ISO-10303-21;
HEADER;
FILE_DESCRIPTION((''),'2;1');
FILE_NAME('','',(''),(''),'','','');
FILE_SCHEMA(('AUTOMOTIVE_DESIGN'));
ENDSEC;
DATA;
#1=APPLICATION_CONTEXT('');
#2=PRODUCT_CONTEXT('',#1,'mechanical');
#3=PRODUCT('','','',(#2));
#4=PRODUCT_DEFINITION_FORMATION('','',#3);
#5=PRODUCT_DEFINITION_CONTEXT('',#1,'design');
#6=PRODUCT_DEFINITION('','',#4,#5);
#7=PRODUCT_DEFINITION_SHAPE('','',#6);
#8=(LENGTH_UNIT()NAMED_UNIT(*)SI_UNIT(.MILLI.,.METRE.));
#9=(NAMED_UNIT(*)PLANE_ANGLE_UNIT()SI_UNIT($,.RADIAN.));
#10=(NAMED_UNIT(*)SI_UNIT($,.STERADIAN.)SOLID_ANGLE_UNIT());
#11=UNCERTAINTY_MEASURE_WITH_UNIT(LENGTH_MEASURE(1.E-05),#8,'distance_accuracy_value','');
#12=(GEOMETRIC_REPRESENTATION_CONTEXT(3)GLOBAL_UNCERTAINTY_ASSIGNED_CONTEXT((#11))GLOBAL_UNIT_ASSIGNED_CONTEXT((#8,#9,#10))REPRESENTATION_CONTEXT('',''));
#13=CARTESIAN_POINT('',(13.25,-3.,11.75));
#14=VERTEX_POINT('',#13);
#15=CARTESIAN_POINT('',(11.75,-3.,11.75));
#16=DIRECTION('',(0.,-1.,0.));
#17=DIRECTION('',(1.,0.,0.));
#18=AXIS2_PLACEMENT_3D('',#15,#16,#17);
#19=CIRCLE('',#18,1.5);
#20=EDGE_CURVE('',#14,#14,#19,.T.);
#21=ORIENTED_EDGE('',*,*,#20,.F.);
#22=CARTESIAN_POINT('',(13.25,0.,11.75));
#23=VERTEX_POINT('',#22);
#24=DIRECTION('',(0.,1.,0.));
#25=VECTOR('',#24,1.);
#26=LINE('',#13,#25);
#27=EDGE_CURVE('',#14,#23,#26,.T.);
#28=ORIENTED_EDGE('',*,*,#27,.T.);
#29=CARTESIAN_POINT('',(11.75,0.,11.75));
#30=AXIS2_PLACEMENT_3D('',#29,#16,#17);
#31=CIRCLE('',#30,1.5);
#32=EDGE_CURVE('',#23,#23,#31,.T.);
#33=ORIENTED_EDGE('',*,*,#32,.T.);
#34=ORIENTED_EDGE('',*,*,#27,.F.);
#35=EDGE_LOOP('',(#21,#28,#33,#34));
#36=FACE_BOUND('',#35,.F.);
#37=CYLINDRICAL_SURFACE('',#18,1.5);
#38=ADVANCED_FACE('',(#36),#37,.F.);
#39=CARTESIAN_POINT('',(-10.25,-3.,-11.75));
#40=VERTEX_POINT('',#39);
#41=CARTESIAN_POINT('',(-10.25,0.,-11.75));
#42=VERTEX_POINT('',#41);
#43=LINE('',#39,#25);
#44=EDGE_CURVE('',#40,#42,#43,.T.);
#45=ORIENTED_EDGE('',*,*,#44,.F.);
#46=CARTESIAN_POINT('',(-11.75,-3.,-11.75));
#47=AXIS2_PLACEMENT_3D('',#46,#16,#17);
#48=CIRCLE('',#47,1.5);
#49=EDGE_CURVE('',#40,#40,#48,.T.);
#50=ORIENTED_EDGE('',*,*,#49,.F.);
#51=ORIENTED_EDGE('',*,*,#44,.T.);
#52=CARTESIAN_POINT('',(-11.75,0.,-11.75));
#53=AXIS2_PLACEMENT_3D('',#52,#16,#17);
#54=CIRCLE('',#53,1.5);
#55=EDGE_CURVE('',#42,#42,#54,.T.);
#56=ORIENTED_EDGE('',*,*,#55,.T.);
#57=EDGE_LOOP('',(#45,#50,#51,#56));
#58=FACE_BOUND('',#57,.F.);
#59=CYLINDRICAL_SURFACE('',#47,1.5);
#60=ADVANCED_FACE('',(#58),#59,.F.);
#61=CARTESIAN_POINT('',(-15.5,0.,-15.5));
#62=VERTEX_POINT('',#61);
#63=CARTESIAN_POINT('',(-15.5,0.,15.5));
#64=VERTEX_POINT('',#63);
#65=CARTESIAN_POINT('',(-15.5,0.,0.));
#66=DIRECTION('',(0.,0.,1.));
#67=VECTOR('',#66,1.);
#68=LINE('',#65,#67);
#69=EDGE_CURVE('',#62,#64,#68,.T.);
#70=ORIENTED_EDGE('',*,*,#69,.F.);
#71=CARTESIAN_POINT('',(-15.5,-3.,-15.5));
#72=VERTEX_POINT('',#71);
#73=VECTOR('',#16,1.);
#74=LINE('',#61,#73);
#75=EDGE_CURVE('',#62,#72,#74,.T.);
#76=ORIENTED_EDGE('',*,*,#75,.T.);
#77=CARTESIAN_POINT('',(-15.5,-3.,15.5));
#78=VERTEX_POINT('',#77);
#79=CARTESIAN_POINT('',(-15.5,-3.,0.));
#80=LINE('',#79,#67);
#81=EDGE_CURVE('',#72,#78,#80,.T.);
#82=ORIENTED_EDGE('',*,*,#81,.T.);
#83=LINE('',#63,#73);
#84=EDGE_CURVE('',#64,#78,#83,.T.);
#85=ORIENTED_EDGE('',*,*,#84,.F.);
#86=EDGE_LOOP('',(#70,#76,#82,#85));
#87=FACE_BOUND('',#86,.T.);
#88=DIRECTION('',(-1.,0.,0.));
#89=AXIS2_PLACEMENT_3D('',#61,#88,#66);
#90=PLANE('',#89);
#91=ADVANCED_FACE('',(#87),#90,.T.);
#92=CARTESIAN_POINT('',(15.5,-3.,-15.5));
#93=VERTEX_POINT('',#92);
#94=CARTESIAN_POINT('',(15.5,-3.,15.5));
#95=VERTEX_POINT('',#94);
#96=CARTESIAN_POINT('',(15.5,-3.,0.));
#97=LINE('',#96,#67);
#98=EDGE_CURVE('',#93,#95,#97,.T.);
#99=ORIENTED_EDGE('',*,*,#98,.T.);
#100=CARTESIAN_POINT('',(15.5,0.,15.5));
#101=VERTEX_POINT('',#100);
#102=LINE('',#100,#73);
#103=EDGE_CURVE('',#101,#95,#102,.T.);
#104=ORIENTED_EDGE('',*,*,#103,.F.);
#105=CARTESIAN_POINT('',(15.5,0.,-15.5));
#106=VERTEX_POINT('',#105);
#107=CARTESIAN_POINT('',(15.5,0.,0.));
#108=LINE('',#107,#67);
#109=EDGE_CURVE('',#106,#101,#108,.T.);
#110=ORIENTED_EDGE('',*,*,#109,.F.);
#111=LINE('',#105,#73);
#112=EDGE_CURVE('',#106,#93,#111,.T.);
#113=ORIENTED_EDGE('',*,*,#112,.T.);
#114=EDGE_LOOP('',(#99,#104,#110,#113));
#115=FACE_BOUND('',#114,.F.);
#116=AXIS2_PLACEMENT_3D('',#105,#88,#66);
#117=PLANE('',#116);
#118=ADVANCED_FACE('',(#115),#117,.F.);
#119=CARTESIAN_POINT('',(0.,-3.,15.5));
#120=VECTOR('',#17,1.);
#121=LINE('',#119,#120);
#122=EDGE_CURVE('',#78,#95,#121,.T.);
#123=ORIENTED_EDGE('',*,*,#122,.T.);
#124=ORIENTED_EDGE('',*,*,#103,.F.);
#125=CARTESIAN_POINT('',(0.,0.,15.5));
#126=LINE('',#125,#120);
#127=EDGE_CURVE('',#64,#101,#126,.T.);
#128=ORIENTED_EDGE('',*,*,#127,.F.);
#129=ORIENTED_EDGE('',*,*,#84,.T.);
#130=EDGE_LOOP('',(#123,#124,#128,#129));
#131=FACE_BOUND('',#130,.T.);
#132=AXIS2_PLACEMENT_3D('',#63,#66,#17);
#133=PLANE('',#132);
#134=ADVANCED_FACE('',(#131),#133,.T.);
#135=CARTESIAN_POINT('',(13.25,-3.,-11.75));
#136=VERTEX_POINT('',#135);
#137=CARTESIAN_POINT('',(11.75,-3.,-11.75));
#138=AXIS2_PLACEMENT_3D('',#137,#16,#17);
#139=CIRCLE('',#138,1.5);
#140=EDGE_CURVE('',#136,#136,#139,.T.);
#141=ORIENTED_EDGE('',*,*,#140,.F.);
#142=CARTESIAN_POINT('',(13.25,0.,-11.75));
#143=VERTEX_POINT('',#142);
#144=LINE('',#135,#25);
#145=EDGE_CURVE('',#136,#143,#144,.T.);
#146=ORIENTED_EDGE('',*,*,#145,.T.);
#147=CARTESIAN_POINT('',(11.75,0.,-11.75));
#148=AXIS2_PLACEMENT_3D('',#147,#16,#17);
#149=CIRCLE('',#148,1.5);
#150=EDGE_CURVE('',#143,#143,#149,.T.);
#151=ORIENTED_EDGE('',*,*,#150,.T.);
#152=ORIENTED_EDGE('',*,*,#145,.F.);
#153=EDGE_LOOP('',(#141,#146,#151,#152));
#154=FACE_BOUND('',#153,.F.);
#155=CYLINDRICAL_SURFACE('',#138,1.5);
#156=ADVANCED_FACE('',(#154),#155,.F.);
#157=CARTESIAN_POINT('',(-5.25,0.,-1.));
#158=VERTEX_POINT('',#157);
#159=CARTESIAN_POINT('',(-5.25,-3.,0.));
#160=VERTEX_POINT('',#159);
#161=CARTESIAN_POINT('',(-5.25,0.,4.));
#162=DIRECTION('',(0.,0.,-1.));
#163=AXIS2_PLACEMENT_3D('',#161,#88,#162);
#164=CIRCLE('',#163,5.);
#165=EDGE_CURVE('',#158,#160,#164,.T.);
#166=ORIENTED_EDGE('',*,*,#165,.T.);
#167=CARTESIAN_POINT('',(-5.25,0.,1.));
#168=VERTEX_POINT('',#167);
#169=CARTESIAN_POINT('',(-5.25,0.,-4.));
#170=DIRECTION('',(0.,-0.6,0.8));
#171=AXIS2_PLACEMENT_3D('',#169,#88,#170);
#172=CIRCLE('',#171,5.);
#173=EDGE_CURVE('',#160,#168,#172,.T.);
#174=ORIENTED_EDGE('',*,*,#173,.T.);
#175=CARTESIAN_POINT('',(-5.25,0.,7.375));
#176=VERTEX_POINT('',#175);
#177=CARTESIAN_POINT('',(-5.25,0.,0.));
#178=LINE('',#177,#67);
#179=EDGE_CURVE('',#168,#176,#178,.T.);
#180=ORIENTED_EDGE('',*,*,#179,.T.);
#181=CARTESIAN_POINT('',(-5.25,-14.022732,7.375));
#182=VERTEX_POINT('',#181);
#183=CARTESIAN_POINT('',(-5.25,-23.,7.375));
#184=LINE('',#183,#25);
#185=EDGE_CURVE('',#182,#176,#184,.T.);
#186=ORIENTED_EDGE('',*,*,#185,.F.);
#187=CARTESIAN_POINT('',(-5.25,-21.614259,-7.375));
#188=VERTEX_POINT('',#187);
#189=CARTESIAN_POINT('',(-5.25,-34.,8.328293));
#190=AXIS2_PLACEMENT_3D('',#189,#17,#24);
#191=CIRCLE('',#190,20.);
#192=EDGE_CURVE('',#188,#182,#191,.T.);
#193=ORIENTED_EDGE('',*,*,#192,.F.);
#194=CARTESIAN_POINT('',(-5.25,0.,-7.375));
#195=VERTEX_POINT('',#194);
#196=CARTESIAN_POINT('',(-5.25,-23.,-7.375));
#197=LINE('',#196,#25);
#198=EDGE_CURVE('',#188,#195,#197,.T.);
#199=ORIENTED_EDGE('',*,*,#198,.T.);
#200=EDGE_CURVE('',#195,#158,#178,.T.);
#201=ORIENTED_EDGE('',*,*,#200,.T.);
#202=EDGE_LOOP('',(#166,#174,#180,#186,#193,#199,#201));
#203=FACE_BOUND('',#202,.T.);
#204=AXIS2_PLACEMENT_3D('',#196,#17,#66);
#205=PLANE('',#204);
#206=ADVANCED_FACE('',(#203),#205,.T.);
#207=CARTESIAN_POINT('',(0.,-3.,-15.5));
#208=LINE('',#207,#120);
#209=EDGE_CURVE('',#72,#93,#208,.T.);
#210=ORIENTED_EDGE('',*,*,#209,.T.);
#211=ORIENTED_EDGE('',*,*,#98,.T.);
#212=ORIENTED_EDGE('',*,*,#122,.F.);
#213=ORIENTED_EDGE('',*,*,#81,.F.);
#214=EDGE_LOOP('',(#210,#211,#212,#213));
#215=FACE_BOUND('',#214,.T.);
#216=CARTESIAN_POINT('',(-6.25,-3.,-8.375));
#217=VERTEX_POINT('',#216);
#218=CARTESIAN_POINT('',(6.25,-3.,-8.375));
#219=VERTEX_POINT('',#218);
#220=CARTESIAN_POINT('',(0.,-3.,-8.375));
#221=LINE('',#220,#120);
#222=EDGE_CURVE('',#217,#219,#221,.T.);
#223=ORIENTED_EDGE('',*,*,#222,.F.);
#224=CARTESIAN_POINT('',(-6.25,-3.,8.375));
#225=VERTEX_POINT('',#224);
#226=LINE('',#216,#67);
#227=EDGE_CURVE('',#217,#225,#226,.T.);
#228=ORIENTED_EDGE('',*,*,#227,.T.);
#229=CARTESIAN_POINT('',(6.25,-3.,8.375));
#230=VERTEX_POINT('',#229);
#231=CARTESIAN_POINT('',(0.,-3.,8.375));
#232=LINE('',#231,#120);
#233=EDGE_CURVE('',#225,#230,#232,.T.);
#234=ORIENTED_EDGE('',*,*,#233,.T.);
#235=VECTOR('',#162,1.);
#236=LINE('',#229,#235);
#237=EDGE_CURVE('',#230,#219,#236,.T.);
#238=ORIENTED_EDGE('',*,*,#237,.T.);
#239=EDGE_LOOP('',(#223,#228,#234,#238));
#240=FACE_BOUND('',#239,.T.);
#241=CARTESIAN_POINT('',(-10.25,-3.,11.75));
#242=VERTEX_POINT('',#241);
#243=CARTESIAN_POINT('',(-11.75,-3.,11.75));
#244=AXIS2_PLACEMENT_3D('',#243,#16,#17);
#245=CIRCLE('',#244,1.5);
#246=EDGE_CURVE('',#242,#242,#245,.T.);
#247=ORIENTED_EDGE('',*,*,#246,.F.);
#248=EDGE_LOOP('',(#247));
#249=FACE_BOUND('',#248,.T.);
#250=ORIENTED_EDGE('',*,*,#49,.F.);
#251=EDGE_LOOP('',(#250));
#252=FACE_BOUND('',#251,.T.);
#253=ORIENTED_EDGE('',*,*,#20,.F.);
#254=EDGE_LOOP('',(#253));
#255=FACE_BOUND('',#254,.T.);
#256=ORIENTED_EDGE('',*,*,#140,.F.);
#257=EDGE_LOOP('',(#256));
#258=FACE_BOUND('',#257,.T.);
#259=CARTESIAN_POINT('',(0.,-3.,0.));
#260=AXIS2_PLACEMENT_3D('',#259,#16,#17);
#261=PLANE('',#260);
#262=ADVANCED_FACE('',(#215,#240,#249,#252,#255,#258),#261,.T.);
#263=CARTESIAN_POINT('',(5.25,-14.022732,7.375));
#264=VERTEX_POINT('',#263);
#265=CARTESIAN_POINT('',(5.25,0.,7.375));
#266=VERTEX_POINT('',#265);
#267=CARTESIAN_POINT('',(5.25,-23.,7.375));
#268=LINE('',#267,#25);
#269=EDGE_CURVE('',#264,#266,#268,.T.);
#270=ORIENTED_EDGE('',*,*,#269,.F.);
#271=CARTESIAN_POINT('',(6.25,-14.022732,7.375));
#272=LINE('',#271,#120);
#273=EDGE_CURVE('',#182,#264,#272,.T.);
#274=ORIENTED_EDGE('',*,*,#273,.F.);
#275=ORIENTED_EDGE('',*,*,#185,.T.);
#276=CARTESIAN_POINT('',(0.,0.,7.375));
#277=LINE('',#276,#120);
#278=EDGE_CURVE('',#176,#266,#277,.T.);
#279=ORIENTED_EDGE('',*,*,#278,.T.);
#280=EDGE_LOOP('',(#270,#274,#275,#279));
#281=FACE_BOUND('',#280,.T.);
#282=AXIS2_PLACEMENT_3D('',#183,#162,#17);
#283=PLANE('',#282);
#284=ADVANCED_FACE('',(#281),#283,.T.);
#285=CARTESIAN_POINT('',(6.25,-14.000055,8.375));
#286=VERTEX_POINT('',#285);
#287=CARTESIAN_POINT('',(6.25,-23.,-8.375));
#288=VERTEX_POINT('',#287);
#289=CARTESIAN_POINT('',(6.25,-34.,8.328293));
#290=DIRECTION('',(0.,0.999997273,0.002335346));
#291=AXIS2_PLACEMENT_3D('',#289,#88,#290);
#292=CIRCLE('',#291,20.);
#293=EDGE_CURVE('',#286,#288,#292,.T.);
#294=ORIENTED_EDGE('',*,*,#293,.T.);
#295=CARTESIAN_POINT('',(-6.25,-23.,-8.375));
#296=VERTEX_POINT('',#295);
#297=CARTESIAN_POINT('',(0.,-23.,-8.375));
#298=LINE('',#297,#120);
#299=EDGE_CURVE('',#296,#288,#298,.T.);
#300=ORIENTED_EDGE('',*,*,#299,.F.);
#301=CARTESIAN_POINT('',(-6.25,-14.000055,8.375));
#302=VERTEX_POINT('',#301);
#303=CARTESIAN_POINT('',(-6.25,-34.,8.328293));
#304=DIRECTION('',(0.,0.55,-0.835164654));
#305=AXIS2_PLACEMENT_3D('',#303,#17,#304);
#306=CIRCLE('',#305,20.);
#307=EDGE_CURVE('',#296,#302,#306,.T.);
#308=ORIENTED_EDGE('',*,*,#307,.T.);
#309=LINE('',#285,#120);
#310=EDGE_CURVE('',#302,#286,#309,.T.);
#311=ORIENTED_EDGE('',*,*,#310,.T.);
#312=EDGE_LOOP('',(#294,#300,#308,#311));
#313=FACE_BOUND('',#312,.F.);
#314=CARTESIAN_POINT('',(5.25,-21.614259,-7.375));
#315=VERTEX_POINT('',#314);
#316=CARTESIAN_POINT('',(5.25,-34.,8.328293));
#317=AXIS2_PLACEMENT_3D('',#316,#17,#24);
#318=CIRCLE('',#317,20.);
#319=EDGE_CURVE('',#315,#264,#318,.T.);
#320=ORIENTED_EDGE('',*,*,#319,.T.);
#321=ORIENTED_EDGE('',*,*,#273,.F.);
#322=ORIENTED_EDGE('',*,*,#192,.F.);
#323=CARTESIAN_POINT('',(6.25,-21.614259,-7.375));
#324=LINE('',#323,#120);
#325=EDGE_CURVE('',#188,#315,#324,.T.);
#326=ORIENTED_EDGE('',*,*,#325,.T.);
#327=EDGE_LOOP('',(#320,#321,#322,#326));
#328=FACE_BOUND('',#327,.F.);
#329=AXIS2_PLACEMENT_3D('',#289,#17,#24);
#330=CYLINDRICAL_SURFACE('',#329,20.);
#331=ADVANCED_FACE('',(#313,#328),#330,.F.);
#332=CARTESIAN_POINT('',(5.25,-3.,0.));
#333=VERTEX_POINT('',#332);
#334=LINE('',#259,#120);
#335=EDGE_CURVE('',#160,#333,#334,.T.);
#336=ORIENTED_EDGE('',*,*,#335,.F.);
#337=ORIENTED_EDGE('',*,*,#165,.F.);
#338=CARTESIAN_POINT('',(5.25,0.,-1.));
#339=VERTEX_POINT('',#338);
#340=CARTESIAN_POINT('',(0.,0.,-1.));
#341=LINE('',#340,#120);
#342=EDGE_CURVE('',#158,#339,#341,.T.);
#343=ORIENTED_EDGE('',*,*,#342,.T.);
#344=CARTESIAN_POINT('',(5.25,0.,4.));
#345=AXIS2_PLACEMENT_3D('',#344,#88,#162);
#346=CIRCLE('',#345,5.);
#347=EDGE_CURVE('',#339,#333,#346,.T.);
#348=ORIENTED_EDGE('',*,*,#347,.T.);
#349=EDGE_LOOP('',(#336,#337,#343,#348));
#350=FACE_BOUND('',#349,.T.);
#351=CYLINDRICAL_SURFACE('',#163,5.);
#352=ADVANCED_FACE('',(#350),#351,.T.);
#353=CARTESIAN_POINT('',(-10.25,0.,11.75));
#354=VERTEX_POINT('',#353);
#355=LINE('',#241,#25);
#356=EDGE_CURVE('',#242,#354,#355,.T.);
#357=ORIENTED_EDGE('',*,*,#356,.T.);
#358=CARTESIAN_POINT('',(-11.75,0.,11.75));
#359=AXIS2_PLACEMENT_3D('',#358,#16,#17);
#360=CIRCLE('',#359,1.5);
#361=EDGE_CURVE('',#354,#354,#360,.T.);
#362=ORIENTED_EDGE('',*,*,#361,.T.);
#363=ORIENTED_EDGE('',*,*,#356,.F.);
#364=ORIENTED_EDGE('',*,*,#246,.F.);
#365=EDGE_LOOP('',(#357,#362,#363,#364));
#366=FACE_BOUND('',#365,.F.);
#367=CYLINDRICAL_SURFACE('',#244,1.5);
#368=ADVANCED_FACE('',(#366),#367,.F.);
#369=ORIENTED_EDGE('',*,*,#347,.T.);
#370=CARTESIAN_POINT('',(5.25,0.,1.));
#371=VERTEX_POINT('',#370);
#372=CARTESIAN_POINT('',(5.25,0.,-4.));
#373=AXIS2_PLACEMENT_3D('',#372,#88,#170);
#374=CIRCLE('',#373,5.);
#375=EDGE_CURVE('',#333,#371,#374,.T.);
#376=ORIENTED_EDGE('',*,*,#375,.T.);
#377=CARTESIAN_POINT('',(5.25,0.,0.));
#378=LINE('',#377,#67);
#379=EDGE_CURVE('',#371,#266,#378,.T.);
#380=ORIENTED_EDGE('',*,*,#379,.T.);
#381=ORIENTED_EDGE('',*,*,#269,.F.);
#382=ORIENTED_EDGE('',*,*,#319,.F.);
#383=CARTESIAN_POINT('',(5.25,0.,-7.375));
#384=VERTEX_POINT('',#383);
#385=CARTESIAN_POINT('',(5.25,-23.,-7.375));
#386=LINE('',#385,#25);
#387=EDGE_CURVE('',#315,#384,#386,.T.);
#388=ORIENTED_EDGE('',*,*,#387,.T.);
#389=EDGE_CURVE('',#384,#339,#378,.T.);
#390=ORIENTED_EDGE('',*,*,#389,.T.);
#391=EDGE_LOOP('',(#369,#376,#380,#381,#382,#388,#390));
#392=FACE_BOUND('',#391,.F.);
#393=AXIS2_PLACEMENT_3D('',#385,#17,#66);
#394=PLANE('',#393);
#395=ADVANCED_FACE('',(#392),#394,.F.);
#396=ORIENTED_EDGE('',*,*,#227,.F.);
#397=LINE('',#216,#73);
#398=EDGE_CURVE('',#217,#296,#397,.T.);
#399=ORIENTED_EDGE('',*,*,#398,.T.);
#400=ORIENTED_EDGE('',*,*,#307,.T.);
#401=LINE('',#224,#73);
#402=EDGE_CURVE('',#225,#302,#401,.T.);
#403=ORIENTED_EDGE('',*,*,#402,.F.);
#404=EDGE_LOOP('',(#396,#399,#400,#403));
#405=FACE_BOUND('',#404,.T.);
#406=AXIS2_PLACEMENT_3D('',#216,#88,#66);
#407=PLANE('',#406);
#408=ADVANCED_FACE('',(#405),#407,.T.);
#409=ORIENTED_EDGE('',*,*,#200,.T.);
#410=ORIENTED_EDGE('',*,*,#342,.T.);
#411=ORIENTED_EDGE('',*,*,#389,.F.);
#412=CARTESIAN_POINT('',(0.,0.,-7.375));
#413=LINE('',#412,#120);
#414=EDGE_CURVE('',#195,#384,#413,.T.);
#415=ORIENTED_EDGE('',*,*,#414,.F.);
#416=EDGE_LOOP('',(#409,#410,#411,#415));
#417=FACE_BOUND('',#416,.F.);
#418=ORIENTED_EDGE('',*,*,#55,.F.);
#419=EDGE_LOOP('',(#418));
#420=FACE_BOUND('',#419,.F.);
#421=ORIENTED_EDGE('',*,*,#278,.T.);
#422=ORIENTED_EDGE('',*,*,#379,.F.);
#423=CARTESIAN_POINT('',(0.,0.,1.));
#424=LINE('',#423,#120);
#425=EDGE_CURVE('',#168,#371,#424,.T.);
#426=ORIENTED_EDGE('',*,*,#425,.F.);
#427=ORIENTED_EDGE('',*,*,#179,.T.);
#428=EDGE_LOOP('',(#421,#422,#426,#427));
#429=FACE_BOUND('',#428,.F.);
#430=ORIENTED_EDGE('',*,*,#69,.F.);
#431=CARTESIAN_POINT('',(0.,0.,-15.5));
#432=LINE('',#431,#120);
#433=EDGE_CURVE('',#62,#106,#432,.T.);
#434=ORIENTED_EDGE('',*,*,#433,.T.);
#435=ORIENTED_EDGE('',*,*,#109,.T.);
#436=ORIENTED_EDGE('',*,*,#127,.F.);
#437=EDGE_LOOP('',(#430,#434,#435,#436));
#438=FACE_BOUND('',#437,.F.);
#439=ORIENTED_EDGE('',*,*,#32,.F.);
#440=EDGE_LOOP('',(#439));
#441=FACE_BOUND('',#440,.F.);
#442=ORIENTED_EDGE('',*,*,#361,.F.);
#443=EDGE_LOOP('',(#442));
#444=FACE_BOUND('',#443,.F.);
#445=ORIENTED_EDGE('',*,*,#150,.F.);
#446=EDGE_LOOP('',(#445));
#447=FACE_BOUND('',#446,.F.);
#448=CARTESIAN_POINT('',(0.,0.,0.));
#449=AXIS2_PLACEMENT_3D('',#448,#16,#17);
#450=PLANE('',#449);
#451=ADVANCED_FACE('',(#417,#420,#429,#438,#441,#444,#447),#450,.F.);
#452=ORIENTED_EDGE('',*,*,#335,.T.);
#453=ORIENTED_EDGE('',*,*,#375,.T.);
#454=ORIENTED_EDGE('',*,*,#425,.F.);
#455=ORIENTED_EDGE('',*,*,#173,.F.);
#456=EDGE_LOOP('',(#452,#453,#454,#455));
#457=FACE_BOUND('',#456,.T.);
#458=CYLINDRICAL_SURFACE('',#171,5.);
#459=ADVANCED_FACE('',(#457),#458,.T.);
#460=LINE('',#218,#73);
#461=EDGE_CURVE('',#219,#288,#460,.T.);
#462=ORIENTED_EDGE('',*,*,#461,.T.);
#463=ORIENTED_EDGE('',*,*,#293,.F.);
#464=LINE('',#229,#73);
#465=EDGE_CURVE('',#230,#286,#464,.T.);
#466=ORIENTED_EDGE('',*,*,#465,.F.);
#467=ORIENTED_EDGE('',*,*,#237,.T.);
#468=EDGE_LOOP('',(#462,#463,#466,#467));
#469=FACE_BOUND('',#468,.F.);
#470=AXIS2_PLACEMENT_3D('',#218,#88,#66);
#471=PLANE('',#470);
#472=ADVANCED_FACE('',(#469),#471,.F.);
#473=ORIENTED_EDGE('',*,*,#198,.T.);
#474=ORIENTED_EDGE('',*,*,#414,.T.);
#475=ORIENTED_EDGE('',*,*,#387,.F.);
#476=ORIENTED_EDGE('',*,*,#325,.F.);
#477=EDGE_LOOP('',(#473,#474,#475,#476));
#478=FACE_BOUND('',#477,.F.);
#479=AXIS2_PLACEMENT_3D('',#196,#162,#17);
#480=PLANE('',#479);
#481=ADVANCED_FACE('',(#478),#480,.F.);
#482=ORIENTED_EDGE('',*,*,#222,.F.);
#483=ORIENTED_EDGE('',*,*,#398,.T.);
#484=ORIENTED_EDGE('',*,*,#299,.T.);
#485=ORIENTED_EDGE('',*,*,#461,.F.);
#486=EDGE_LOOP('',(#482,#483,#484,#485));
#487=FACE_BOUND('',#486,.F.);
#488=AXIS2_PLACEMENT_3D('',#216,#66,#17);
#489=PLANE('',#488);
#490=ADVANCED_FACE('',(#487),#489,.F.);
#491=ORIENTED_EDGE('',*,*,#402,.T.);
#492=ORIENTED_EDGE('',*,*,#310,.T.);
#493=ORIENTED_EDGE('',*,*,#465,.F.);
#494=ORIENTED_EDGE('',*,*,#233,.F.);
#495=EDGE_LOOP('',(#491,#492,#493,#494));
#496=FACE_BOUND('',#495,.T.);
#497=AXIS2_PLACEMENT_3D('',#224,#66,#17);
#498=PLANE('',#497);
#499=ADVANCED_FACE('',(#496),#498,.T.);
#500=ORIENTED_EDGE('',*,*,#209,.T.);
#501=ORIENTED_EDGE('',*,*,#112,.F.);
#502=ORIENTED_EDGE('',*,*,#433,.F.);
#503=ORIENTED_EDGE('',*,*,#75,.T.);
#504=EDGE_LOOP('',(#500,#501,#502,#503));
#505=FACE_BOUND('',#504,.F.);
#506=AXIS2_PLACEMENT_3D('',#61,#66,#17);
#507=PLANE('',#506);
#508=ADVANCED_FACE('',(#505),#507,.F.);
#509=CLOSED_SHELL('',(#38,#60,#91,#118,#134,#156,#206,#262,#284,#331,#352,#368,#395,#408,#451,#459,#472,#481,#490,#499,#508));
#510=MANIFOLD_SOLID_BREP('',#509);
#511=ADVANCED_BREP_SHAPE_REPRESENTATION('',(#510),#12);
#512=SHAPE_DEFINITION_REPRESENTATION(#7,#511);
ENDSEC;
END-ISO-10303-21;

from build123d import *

# Parameters (mm, degrees)
F0_W         = 31
F0_H         = 31
F1_DEPTH     = 3
F2_R         = 1.5
F3_DEPTH     = 3
F4_W         = 12.5
F4_H         = 16.75
F5_DEPTH     = 20
F6_W         = 10.5
F6_H         = 14.75
F7_DEPTH     = 23
F8_R         = 20
F9_DEPTH     = 25
F10_W        = 12.5
F10_H        = 1
F11_DEPTH    = 3
F12_T1_DEPTH = 10.5
F13_W        = 12.5
F13_H        = 1
F14_DEPTH    = 3
F15_T1_DEPTH = 10.5


# Not quite as in the source:
# - a fillet or chamfer that OpenCascade refuses, or shapes differently, is made with other operations: its cross-section is extruded or revolved along the edge and cut away or added


with BuildPart() as f1:
    # F0 (on Front) → F1 (new body)
    with BuildSketch(Plane.XZ):
        Rectangle(F0_W, F0_H)
    extrude(amount=F1_DEPTH)

    # F2 (on face) → F3 (cut)
    with BuildSketch(Plane.XZ.offset(3)):
        with Locations((-11.75, -11.75)):
            Circle(F2_R)
        with Locations((-11.75, 11.75)):
            Circle(F2_R)
        with Locations((11.75, 11.75)):
            Circle(F2_R)
        with Locations((11.75, -11.75)):
            Circle(F2_R)
    extrude(amount=-F3_DEPTH, mode=Mode.SUBTRACT)

    # F4 (on face) → F5 (join)
    with BuildSketch(Plane.XZ.offset(3)):
        Rectangle(F4_W, F4_H)
    extrude(amount=F5_DEPTH)

    # F6 (on face) → F7 (cut)
    with BuildSketch(Plane.XZ.offset(23)):
        Rectangle(F6_W, F6_H)
    extrude(amount=-F7_DEPTH, mode=Mode.SUBTRACT)

    # F8 (on face) → F9 (cut)
    with BuildSketch(Plane.YZ.offset(6.25)):
        with Locations((-34, 8.3282930885)):
            Circle(F8_R)
    extrude(amount=-F9_DEPTH, mode=Mode.SUBTRACT)

    # F10 (on face) → F11 (join)
    with BuildSketch(Plane.XZ.offset(3)):
        with Locations((0, -0.5)):
            Rectangle(F10_W, F10_H)
    extrude(amount=-F11_DEPTH)

    # F12: fillet of radius 5 on 1 edges, made by hand

    # F12_s2 → F12_t1 (cut)
    with BuildSketch(Plane.YZ.offset(-5.25)):
        with BuildLine():
            ThreePointArc((0, -1), (-1.5811388301, -0.7434164903), (-3, 0))
            Line((-3, 0), (-3, -1))
            Line((-3, -1), (0, -1))
        make_face()
    extrude(amount=F12_T1_DEPTH, mode=Mode.SUBTRACT)

    # F13 (on face) → F14 (join)
    with BuildSketch(Plane.XZ.offset(3)):
        with Locations((0, 0.5)):
            Rectangle(F13_W, F13_H)
    extrude(amount=-F14_DEPTH)

    # F15: fillet of radius 5 on 1 edges, made by hand

    # F15_s2 → F15_t1 (cut)
    with BuildSketch(Plane.YZ.offset(-5.25)):
        with BuildLine():
            ThreePointArc((-3, 0), (-1.5811388301, 0.7434164903), (0, 1))
            Line((0, 1), (-3, 1))
            Line((-3, 1), (-3, 0))
        make_face()
    extrude(amount=F15_T1_DEPTH, mode=Mode.SUBTRACT)


solid = f1.part
